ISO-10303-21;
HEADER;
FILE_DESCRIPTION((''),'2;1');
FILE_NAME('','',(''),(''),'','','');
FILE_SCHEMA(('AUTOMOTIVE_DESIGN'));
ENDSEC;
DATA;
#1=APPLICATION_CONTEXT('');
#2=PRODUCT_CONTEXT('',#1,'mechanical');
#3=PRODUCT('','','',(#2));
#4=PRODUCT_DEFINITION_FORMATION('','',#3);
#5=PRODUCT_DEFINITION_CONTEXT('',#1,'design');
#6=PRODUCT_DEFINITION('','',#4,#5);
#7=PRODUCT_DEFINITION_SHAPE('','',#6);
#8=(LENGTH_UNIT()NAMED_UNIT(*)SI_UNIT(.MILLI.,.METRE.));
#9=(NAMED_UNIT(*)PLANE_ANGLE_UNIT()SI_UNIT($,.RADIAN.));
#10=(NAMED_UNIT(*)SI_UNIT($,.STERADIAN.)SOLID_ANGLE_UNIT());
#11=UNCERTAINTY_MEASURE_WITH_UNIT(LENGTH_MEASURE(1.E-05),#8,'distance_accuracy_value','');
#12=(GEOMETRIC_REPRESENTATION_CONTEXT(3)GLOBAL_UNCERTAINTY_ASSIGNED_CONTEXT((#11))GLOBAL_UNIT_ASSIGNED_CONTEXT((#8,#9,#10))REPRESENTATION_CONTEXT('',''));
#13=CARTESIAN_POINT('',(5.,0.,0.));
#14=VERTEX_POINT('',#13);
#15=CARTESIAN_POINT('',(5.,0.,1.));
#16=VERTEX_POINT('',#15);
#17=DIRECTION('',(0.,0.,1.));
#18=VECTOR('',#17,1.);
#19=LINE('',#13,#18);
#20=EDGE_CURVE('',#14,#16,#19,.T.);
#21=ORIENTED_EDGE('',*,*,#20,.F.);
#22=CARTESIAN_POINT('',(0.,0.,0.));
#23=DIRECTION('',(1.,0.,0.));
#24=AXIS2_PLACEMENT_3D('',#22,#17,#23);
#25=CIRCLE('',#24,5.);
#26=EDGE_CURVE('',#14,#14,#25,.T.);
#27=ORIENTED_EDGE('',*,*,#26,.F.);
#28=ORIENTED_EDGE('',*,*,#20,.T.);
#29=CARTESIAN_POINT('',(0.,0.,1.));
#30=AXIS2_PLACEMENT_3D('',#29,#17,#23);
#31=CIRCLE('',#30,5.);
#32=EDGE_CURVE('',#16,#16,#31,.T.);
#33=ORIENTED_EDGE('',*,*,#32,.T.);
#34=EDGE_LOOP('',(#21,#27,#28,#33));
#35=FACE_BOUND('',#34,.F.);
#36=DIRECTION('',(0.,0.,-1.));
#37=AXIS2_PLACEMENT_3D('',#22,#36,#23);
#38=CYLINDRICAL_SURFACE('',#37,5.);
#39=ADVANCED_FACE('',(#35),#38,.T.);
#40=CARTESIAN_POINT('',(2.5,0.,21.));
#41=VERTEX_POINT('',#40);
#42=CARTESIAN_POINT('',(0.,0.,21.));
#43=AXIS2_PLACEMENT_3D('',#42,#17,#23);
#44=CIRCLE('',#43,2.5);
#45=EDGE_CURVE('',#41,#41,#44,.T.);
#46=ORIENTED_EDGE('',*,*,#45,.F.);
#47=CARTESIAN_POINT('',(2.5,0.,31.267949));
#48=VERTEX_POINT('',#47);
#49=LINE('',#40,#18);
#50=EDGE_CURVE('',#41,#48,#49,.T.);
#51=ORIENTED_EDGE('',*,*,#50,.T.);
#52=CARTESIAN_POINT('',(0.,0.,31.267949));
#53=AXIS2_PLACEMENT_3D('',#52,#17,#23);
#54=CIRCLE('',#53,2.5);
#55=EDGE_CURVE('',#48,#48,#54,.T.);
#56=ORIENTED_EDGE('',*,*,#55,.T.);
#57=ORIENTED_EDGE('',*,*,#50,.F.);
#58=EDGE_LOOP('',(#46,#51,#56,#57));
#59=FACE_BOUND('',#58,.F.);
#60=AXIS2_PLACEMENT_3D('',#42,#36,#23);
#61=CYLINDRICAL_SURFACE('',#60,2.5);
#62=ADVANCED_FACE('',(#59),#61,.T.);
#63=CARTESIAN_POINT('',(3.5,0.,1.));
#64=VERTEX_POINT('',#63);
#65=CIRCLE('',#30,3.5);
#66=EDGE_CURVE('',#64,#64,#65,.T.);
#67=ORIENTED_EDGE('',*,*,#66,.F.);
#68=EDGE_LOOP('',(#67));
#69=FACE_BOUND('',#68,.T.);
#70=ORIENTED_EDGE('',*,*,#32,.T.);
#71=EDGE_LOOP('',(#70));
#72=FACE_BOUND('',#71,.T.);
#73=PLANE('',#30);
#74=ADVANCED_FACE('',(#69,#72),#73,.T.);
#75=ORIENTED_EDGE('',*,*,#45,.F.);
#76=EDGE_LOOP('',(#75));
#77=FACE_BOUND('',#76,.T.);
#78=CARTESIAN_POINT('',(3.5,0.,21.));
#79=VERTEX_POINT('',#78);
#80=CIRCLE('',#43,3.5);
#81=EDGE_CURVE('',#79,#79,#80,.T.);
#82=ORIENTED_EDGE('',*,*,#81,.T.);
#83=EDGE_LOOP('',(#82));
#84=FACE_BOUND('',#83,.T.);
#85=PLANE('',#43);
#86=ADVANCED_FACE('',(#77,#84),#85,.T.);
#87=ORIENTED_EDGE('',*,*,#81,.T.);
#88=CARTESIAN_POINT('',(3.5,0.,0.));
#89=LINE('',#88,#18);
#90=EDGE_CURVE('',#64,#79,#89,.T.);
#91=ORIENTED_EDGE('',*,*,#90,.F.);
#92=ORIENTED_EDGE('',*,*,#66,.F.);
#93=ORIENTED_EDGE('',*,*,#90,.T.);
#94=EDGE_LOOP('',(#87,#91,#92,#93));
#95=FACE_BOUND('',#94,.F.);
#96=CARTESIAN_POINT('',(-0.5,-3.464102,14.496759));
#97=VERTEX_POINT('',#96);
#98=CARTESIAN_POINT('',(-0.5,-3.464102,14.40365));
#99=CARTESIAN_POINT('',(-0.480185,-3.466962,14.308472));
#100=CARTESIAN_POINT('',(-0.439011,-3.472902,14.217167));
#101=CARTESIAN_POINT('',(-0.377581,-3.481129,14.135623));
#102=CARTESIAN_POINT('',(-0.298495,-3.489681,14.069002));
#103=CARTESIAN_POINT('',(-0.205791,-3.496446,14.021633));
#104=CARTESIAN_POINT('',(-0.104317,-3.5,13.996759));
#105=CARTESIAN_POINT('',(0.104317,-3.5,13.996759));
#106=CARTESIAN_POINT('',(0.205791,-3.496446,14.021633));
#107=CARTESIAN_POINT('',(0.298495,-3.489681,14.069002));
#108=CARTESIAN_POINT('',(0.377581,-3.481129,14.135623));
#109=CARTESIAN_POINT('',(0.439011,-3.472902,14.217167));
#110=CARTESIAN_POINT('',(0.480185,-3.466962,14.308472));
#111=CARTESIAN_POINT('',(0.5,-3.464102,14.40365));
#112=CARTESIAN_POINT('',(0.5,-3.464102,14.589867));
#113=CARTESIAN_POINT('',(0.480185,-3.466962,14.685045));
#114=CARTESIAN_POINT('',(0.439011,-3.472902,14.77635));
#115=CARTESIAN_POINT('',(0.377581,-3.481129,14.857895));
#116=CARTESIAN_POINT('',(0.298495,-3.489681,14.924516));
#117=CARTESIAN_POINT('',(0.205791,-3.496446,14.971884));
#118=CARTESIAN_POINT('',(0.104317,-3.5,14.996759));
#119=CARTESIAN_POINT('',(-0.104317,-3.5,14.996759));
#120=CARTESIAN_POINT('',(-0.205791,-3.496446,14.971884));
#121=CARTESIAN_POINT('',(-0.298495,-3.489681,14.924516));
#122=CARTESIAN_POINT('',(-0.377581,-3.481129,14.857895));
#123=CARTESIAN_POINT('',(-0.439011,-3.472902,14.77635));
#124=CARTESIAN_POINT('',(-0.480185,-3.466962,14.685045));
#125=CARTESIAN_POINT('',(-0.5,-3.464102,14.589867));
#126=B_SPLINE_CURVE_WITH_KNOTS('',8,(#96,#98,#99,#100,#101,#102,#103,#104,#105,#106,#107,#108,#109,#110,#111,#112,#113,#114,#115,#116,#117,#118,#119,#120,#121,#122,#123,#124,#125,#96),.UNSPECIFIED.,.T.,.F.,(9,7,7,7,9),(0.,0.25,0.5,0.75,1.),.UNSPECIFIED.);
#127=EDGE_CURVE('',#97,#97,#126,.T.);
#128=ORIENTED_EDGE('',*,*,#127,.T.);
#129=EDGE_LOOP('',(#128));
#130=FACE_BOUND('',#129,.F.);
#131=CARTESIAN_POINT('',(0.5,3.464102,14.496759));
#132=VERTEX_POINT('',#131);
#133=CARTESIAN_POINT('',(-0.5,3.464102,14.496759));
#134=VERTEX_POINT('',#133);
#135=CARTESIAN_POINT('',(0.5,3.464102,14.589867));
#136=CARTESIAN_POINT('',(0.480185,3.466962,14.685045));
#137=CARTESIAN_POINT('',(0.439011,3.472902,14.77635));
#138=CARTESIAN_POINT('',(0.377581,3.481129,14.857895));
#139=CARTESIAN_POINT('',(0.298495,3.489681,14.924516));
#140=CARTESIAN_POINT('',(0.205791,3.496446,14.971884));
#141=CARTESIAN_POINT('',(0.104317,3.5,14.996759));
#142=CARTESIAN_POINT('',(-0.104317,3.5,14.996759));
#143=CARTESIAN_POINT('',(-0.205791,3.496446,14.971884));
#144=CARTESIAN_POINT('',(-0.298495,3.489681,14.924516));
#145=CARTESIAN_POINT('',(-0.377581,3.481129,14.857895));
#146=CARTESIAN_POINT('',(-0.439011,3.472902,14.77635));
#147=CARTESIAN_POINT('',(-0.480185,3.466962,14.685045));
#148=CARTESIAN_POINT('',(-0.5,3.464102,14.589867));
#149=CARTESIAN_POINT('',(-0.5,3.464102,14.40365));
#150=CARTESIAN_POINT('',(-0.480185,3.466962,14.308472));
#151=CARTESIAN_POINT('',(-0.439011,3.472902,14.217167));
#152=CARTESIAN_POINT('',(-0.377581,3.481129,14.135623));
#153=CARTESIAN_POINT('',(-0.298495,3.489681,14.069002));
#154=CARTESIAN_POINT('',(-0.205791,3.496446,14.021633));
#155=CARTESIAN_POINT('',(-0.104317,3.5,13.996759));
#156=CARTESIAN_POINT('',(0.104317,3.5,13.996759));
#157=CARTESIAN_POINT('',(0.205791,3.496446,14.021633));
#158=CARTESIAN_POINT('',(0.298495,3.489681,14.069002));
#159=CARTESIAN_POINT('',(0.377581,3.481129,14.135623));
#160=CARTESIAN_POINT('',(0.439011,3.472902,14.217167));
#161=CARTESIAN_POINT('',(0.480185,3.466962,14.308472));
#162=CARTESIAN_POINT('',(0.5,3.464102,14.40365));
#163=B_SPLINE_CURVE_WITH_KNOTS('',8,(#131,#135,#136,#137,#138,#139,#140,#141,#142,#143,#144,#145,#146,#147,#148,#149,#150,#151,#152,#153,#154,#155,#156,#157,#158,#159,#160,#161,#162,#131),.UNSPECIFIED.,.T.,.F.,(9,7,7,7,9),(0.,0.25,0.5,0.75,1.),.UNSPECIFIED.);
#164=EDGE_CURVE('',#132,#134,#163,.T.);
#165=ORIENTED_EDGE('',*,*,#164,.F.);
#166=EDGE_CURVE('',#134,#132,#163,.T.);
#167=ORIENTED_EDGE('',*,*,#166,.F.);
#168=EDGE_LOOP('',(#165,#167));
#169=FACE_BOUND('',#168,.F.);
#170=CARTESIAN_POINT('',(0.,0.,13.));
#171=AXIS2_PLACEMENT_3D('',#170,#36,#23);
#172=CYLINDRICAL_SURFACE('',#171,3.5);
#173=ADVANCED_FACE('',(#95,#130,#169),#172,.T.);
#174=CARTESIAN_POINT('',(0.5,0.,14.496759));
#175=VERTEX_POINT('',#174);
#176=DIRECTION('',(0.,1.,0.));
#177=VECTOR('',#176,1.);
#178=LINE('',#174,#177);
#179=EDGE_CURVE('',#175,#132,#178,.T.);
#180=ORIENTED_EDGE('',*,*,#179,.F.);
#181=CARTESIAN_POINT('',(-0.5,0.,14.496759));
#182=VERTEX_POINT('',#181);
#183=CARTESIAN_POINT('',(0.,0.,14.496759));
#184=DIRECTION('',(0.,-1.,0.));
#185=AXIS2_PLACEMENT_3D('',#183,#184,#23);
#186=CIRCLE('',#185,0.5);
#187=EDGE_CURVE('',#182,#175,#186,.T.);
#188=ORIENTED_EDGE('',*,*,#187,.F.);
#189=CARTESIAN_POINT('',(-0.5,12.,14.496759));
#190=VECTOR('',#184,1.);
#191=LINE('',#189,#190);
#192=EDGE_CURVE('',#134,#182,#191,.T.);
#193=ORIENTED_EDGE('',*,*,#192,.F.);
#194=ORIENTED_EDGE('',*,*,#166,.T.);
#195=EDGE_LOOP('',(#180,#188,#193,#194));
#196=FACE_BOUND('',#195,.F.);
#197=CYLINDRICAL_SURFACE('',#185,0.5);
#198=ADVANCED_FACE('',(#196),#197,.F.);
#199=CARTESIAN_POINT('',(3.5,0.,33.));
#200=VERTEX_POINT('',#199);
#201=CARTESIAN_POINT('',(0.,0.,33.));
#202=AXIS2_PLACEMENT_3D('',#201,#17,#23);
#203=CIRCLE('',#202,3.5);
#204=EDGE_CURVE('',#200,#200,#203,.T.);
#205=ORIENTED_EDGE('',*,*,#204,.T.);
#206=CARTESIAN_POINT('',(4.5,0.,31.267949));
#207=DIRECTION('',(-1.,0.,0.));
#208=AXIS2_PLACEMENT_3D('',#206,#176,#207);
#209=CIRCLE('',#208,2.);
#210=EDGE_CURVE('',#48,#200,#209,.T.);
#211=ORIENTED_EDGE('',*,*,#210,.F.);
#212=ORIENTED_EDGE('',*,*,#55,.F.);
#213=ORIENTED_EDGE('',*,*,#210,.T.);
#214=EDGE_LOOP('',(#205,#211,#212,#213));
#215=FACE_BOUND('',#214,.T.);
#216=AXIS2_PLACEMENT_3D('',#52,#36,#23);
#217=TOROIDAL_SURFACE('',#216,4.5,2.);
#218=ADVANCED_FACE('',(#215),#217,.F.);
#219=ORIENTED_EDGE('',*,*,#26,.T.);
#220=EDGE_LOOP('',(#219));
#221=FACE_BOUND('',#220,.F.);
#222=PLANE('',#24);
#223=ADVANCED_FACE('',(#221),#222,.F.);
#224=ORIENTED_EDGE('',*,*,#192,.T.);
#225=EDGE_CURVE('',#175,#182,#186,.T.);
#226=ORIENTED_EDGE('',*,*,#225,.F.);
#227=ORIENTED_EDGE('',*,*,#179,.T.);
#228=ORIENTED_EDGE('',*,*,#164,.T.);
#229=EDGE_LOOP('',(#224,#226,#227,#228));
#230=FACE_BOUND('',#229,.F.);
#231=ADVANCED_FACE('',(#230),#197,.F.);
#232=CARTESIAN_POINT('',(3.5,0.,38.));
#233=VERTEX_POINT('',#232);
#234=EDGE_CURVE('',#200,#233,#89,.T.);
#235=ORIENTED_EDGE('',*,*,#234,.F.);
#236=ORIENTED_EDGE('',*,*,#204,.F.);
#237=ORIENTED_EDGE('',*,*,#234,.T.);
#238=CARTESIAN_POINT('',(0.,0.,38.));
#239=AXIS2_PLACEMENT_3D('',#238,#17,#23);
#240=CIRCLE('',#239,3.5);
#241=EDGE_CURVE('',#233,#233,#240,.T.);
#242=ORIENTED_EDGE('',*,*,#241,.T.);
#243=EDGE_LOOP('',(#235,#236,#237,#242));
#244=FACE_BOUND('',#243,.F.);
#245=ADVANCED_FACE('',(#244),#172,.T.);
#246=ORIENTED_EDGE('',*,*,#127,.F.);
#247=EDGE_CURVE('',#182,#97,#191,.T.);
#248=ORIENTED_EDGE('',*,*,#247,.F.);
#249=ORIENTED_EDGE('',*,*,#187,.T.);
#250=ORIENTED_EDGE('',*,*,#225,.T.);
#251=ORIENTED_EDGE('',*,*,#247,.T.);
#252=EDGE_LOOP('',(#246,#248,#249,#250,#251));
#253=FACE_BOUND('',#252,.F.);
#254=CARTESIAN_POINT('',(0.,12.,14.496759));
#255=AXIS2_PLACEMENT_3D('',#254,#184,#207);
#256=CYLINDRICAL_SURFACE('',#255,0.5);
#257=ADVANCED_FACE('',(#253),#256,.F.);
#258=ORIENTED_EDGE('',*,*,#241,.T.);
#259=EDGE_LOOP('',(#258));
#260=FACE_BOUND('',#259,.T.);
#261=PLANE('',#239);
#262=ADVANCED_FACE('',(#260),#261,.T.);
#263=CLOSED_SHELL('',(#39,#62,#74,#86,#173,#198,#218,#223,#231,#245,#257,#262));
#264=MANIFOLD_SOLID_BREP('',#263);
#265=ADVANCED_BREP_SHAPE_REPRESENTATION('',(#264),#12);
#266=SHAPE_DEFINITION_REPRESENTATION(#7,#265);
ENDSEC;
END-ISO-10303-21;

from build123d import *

# Parameters (mm, degrees)
F0_R     = 3.5
F1_DEPTH = 13
F7_R     = 3.5
F7_R_2   = 2.5
F8_DEPTH = 25
F9_START = 8
F9_DEPTH = 12
F0_R_2   = 5
F3_DEPTH = 1
F5_D     = 1
F5_DEPTH = 5.001
F6_D     = 1
F6_DEPTH = 12
F6_TIP   = 0.3004303095


# Not quite as in the source:
# - a fillet or chamfer that OpenCascade refuses, or shapes differently, is made with other operations: its cross-section is extruded or revolved along the edge and cut away or added


with BuildPart() as f1:
    # F0 (on Top) → F1 (new body)
    with BuildSketch(Plane.XY):
        Circle(F0_R)
    extrude(amount=F1_DEPTH)

    # F7 (on face) → F8 (join)
    with BuildSketch(Plane.XY.offset(13)):
        Circle(F7_R)
        Circle(F7_R_2, mode=Mode.SUBTRACT)
        Circle(F7_R_2)
    extrude(amount=F8_DEPTH)

    # F7 (on face) → F9 (cut)
    with BuildSketch(Plane.XY.offset(13).offset(F9_START)):
        Circle(F7_R)
        Circle(F7_R_2, mode=Mode.SUBTRACT)
    extrude(amount=F9_DEPTH, mode=Mode.SUBTRACT)

    # F2: fillet of radius 2 on 1 edges, made by hand

    # F2_s1 → F2_t2 (revolve)
    with BuildSketch(Plane.XZ):
        with BuildLine():
            ThreePointArc((2.5, 31.2679491924), (2.7679491924, 32.2679491924), (3.5, 33))
            Line((3.5, 33), (2.5, 33))
            Line((2.5, 33), (2.5, 31.2679491924))
        make_face()
    revolve(axis=Axis((0, 0, 33), (0, 0, 1)))

    # F0 (on Top) → F3 (join)
    with BuildSketch(Plane.XY):
        Circle(F0_R_2)
        Circle(F0_R, mode=Mode.SUBTRACT)
    extrude(amount=F3_DEPTH)

    # F5 (through all, one way)
    with BuildSketch(Plane.XZ):
        with Locations((0, 14.4967586048)):
            Circle(F5_D / 2)
    extrude(amount=-F5_DEPTH, mode=Mode.SUBTRACT)

    # F6
    with Locations(Plane(origin=(0, 0, 0), x_dir=(1, 0, 0), z_dir=(0, 1, 0))):
        with Locations((0, -14.4967586048)):
            Hole(F6_D / 2, depth=F6_DEPTH)
            with Locations((0, 0, -(F6_DEPTH + F6_TIP / 2))):  # 118° drill point
                Cone(0, F6_D / 2, F6_TIP, mode=Mode.SUBTRACT)


solid = f1.part
